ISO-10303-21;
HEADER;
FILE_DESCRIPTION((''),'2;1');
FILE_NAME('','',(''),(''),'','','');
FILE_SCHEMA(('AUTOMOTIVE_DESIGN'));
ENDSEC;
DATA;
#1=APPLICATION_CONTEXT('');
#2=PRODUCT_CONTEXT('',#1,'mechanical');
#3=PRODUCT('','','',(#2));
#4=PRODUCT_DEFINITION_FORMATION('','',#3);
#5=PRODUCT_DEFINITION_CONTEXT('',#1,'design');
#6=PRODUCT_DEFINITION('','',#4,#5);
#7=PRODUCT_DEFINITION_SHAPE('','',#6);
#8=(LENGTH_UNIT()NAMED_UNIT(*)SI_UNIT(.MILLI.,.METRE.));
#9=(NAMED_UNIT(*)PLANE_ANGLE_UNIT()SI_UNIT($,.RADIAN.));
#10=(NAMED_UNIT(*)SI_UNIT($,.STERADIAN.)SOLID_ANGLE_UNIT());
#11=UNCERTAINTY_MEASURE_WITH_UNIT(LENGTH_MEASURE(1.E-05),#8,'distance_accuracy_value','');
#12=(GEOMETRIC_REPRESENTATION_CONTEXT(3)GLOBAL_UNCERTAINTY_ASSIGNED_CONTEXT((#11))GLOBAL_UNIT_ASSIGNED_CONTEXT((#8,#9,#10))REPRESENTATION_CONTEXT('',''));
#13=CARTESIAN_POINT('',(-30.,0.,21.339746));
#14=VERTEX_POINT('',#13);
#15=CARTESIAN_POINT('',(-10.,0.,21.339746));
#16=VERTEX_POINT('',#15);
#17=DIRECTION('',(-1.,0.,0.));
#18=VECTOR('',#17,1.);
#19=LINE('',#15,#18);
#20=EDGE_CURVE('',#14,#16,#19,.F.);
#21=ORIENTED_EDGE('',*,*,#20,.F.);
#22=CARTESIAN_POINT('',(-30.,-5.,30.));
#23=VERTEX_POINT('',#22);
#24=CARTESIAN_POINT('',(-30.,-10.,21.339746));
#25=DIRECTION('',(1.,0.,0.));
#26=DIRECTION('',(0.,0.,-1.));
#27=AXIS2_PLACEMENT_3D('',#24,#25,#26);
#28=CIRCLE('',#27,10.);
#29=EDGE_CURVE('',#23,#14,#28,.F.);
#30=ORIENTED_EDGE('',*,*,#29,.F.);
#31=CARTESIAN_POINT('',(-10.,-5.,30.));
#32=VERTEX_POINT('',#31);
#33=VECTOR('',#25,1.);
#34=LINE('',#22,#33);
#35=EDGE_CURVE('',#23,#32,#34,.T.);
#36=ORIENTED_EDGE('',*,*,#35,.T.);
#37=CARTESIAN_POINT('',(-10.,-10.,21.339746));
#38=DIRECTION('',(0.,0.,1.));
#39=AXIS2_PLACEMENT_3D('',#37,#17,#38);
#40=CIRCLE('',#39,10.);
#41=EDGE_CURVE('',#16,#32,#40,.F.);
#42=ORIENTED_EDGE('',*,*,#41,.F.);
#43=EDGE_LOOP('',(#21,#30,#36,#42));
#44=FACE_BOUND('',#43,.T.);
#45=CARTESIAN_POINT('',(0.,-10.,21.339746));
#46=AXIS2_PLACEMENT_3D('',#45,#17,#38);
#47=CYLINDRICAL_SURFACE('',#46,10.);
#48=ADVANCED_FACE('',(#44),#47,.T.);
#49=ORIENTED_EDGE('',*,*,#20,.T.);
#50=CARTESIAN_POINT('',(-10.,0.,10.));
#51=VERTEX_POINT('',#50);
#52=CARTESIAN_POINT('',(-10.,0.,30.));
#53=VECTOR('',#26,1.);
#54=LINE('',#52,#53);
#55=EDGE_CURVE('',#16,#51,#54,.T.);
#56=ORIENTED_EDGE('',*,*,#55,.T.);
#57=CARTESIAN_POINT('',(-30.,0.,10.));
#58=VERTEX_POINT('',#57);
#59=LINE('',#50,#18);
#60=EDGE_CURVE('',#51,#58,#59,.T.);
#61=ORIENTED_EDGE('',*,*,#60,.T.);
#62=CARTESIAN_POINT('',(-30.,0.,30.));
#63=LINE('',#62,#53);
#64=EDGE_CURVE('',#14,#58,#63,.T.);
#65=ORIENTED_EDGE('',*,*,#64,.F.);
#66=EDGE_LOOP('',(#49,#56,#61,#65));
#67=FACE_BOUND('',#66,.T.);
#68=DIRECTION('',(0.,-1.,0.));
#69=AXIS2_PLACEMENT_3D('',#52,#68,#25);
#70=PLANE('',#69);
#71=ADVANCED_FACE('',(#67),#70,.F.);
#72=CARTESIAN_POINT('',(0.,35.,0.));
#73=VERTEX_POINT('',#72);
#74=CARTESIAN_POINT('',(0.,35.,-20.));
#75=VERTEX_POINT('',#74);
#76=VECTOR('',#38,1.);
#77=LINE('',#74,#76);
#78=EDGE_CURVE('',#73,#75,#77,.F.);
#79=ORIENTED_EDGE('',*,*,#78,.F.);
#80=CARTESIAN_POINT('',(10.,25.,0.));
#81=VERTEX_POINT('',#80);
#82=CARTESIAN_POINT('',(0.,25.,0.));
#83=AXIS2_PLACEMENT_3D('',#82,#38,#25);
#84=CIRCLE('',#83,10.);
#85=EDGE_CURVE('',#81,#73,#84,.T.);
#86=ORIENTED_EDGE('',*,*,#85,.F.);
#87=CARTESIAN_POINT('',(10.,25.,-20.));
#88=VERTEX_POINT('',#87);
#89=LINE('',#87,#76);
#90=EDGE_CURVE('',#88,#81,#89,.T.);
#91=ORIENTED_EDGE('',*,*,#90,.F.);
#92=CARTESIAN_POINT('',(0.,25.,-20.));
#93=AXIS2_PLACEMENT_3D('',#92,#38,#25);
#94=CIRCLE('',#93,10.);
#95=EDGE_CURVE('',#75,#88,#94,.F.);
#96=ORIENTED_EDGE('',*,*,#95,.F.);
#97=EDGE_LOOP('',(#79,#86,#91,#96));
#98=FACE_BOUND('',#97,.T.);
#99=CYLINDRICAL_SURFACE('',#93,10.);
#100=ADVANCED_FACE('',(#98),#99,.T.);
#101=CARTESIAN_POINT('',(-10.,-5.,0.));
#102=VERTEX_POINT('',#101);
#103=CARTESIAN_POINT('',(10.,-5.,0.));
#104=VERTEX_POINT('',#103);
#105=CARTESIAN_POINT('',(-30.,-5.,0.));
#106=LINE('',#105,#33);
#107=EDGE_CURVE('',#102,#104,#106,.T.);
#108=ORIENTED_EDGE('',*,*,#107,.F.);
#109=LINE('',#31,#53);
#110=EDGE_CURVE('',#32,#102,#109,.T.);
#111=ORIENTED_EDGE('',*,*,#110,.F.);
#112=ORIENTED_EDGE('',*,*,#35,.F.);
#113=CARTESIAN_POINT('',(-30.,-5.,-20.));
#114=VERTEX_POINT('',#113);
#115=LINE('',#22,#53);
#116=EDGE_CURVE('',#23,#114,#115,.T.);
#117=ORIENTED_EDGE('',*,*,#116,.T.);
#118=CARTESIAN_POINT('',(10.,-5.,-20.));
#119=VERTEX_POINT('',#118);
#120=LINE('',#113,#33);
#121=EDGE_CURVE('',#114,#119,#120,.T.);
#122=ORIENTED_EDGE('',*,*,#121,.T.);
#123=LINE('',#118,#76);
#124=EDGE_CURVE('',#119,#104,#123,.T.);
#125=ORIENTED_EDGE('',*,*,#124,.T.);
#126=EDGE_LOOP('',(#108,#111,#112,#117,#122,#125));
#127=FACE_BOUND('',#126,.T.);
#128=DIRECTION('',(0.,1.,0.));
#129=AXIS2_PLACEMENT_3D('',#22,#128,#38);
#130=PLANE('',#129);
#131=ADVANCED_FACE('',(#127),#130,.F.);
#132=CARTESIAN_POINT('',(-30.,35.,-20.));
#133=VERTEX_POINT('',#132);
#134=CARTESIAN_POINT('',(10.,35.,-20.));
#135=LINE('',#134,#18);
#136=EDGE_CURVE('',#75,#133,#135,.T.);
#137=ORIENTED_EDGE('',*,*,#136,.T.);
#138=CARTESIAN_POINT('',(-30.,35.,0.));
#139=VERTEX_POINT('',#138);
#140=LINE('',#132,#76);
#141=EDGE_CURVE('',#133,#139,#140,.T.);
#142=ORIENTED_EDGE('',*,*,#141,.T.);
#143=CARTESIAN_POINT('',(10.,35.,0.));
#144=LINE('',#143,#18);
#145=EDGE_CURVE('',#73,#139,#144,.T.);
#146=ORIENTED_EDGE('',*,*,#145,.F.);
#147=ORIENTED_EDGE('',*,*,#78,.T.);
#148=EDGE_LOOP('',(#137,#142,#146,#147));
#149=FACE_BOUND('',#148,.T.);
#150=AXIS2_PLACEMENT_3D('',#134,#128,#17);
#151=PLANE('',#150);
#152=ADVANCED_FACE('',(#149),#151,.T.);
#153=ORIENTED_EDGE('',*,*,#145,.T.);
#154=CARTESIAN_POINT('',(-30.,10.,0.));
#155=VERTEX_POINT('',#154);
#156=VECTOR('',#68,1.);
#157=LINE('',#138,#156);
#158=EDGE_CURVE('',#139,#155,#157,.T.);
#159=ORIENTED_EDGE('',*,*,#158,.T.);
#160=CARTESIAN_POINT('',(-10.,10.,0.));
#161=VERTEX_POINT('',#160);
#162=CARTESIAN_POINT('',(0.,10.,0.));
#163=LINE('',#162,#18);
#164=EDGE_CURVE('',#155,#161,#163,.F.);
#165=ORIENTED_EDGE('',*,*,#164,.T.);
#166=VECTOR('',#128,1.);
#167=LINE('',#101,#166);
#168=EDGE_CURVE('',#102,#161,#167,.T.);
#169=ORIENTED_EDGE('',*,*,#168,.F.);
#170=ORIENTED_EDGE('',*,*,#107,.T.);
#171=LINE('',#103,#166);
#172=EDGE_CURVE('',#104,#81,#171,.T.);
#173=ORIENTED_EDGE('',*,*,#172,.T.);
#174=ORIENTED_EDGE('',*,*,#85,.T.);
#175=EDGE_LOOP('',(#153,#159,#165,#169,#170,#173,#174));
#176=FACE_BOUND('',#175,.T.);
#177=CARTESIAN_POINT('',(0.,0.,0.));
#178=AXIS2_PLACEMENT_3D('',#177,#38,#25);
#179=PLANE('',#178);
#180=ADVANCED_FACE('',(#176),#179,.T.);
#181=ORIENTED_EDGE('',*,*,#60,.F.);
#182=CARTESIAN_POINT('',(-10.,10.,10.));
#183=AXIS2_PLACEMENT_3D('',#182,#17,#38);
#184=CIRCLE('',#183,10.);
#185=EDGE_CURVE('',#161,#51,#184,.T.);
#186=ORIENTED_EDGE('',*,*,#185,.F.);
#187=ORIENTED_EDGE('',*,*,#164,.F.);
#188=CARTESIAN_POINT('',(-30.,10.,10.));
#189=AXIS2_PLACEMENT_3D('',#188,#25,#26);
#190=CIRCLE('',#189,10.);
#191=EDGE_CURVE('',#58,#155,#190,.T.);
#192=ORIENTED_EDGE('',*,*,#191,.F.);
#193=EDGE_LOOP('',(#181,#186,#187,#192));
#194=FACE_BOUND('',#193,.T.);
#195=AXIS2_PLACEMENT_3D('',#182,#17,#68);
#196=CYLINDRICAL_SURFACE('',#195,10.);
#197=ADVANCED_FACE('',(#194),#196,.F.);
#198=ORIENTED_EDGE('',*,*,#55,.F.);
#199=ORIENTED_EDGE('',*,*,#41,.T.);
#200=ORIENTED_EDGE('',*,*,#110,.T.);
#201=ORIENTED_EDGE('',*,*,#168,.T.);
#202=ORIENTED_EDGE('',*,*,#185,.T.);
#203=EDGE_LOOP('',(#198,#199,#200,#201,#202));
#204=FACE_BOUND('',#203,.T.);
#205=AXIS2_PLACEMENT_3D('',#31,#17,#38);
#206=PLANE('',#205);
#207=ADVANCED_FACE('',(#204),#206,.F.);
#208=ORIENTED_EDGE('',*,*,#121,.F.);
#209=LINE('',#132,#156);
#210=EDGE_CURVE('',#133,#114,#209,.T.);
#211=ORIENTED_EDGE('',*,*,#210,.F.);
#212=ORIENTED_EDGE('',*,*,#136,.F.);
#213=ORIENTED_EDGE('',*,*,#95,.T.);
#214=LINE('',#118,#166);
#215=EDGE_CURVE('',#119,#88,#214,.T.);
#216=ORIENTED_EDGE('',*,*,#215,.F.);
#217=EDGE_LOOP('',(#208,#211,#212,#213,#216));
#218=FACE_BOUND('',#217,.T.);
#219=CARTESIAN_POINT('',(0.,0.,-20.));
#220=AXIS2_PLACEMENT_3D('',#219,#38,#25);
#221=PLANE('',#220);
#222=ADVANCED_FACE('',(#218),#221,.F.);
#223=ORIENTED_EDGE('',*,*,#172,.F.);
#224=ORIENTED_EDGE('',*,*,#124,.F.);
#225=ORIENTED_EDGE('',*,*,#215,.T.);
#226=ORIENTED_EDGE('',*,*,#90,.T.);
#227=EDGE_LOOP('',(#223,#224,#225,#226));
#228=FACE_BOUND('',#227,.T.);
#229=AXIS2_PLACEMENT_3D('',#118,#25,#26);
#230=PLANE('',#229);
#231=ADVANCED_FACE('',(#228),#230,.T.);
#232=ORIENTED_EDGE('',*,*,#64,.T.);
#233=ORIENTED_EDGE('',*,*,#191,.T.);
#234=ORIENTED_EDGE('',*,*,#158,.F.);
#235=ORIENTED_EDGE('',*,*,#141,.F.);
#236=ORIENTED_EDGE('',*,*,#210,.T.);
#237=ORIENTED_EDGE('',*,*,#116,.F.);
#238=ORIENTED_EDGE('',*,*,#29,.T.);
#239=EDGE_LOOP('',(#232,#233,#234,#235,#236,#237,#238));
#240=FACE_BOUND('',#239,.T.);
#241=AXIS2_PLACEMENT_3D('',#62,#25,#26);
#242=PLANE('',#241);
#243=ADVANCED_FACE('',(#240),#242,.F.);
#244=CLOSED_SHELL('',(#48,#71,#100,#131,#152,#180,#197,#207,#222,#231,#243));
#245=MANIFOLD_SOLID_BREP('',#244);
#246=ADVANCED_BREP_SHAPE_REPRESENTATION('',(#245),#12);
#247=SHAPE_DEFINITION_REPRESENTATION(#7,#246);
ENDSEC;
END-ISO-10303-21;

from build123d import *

# Parameters (mm, degrees)
SKETCH1_W           = 20
SKETCH1_H           = 5
BOSS_EXTRUDE1_DEPTH = 30
SKETCH2_W           = 40
SKETCH2_H           = 40
BOSS_EXTRUDE2_DEPTH = 20
FILLET1_R           = 10


with BuildPart() as part:
    # Sketch1 → Boss-Extrude1 (new body)
    with BuildSketch(Plane.XY):
        with Locations((-20, -2.5)):
            Rectangle(SKETCH1_W, SKETCH1_H)
    extrude(amount=BOSS_EXTRUDE1_DEPTH)

    # Sketch2 → Boss-Extrude2 (add)
    with BuildSketch(Plane.XY):
        with Locations((-10, 15)):
            Rectangle(SKETCH2_W, SKETCH2_H)
    extrude(amount=-BOSS_EXTRUDE2_DEPTH)

    # Fillet1
    # the kernel refuses this fillet: 10 mm, written as the material it adds along each edge
    with BuildSketch(Plane(origin=(-10, 0, 0), x_dir=(0, 1, 0), z_dir=(-1, 0, 0))) as fillet1_piece_1:
        with BuildLine():
            CenterArc((FILLET1_R, -FILLET1_R), FILLET1_R, 90, 90)
            Line((0, -FILLET1_R), (0, 0))
            Line((0, 0), (FILLET1_R, 0))
        make_face()
    extrude(amount=20)
    # the kernel refuses this fillet: 10 mm, written as the material it takes off along each edge
    with BuildSketch(Plane(origin=(10, 35, 25), x_dir=(-1, 0, 0), z_dir=(0, 0, -1))) as fillet1_2_piece_1:
        with BuildLine():
            CenterArc((FILLET1_R, -FILLET1_R), FILLET1_R, 90, 90)
            Line((0, -FILLET1_R), (0, 0))
            Line((0, 0), (FILLET1_R, 0))
        make_face()
    extrude(amount=70, mode=Mode.SUBTRACT)
    with BuildSketch(Plane(origin=(11.650635095, 0, 30), x_dir=(0, 0, -1), z_dir=(-1, 0, 0))) as fillet1_2_piece_2:
        with BuildLine():
            CenterArc((8.660254038, 10), FILLET1_R, 210, 60)
            Line((0, 5), (0, 0))
            Line((0, 0), (8.660254038, 0))
        make_face()
    extrude(amount=63.301270189, mode=Mode.SUBTRACT)


solid = part.part
